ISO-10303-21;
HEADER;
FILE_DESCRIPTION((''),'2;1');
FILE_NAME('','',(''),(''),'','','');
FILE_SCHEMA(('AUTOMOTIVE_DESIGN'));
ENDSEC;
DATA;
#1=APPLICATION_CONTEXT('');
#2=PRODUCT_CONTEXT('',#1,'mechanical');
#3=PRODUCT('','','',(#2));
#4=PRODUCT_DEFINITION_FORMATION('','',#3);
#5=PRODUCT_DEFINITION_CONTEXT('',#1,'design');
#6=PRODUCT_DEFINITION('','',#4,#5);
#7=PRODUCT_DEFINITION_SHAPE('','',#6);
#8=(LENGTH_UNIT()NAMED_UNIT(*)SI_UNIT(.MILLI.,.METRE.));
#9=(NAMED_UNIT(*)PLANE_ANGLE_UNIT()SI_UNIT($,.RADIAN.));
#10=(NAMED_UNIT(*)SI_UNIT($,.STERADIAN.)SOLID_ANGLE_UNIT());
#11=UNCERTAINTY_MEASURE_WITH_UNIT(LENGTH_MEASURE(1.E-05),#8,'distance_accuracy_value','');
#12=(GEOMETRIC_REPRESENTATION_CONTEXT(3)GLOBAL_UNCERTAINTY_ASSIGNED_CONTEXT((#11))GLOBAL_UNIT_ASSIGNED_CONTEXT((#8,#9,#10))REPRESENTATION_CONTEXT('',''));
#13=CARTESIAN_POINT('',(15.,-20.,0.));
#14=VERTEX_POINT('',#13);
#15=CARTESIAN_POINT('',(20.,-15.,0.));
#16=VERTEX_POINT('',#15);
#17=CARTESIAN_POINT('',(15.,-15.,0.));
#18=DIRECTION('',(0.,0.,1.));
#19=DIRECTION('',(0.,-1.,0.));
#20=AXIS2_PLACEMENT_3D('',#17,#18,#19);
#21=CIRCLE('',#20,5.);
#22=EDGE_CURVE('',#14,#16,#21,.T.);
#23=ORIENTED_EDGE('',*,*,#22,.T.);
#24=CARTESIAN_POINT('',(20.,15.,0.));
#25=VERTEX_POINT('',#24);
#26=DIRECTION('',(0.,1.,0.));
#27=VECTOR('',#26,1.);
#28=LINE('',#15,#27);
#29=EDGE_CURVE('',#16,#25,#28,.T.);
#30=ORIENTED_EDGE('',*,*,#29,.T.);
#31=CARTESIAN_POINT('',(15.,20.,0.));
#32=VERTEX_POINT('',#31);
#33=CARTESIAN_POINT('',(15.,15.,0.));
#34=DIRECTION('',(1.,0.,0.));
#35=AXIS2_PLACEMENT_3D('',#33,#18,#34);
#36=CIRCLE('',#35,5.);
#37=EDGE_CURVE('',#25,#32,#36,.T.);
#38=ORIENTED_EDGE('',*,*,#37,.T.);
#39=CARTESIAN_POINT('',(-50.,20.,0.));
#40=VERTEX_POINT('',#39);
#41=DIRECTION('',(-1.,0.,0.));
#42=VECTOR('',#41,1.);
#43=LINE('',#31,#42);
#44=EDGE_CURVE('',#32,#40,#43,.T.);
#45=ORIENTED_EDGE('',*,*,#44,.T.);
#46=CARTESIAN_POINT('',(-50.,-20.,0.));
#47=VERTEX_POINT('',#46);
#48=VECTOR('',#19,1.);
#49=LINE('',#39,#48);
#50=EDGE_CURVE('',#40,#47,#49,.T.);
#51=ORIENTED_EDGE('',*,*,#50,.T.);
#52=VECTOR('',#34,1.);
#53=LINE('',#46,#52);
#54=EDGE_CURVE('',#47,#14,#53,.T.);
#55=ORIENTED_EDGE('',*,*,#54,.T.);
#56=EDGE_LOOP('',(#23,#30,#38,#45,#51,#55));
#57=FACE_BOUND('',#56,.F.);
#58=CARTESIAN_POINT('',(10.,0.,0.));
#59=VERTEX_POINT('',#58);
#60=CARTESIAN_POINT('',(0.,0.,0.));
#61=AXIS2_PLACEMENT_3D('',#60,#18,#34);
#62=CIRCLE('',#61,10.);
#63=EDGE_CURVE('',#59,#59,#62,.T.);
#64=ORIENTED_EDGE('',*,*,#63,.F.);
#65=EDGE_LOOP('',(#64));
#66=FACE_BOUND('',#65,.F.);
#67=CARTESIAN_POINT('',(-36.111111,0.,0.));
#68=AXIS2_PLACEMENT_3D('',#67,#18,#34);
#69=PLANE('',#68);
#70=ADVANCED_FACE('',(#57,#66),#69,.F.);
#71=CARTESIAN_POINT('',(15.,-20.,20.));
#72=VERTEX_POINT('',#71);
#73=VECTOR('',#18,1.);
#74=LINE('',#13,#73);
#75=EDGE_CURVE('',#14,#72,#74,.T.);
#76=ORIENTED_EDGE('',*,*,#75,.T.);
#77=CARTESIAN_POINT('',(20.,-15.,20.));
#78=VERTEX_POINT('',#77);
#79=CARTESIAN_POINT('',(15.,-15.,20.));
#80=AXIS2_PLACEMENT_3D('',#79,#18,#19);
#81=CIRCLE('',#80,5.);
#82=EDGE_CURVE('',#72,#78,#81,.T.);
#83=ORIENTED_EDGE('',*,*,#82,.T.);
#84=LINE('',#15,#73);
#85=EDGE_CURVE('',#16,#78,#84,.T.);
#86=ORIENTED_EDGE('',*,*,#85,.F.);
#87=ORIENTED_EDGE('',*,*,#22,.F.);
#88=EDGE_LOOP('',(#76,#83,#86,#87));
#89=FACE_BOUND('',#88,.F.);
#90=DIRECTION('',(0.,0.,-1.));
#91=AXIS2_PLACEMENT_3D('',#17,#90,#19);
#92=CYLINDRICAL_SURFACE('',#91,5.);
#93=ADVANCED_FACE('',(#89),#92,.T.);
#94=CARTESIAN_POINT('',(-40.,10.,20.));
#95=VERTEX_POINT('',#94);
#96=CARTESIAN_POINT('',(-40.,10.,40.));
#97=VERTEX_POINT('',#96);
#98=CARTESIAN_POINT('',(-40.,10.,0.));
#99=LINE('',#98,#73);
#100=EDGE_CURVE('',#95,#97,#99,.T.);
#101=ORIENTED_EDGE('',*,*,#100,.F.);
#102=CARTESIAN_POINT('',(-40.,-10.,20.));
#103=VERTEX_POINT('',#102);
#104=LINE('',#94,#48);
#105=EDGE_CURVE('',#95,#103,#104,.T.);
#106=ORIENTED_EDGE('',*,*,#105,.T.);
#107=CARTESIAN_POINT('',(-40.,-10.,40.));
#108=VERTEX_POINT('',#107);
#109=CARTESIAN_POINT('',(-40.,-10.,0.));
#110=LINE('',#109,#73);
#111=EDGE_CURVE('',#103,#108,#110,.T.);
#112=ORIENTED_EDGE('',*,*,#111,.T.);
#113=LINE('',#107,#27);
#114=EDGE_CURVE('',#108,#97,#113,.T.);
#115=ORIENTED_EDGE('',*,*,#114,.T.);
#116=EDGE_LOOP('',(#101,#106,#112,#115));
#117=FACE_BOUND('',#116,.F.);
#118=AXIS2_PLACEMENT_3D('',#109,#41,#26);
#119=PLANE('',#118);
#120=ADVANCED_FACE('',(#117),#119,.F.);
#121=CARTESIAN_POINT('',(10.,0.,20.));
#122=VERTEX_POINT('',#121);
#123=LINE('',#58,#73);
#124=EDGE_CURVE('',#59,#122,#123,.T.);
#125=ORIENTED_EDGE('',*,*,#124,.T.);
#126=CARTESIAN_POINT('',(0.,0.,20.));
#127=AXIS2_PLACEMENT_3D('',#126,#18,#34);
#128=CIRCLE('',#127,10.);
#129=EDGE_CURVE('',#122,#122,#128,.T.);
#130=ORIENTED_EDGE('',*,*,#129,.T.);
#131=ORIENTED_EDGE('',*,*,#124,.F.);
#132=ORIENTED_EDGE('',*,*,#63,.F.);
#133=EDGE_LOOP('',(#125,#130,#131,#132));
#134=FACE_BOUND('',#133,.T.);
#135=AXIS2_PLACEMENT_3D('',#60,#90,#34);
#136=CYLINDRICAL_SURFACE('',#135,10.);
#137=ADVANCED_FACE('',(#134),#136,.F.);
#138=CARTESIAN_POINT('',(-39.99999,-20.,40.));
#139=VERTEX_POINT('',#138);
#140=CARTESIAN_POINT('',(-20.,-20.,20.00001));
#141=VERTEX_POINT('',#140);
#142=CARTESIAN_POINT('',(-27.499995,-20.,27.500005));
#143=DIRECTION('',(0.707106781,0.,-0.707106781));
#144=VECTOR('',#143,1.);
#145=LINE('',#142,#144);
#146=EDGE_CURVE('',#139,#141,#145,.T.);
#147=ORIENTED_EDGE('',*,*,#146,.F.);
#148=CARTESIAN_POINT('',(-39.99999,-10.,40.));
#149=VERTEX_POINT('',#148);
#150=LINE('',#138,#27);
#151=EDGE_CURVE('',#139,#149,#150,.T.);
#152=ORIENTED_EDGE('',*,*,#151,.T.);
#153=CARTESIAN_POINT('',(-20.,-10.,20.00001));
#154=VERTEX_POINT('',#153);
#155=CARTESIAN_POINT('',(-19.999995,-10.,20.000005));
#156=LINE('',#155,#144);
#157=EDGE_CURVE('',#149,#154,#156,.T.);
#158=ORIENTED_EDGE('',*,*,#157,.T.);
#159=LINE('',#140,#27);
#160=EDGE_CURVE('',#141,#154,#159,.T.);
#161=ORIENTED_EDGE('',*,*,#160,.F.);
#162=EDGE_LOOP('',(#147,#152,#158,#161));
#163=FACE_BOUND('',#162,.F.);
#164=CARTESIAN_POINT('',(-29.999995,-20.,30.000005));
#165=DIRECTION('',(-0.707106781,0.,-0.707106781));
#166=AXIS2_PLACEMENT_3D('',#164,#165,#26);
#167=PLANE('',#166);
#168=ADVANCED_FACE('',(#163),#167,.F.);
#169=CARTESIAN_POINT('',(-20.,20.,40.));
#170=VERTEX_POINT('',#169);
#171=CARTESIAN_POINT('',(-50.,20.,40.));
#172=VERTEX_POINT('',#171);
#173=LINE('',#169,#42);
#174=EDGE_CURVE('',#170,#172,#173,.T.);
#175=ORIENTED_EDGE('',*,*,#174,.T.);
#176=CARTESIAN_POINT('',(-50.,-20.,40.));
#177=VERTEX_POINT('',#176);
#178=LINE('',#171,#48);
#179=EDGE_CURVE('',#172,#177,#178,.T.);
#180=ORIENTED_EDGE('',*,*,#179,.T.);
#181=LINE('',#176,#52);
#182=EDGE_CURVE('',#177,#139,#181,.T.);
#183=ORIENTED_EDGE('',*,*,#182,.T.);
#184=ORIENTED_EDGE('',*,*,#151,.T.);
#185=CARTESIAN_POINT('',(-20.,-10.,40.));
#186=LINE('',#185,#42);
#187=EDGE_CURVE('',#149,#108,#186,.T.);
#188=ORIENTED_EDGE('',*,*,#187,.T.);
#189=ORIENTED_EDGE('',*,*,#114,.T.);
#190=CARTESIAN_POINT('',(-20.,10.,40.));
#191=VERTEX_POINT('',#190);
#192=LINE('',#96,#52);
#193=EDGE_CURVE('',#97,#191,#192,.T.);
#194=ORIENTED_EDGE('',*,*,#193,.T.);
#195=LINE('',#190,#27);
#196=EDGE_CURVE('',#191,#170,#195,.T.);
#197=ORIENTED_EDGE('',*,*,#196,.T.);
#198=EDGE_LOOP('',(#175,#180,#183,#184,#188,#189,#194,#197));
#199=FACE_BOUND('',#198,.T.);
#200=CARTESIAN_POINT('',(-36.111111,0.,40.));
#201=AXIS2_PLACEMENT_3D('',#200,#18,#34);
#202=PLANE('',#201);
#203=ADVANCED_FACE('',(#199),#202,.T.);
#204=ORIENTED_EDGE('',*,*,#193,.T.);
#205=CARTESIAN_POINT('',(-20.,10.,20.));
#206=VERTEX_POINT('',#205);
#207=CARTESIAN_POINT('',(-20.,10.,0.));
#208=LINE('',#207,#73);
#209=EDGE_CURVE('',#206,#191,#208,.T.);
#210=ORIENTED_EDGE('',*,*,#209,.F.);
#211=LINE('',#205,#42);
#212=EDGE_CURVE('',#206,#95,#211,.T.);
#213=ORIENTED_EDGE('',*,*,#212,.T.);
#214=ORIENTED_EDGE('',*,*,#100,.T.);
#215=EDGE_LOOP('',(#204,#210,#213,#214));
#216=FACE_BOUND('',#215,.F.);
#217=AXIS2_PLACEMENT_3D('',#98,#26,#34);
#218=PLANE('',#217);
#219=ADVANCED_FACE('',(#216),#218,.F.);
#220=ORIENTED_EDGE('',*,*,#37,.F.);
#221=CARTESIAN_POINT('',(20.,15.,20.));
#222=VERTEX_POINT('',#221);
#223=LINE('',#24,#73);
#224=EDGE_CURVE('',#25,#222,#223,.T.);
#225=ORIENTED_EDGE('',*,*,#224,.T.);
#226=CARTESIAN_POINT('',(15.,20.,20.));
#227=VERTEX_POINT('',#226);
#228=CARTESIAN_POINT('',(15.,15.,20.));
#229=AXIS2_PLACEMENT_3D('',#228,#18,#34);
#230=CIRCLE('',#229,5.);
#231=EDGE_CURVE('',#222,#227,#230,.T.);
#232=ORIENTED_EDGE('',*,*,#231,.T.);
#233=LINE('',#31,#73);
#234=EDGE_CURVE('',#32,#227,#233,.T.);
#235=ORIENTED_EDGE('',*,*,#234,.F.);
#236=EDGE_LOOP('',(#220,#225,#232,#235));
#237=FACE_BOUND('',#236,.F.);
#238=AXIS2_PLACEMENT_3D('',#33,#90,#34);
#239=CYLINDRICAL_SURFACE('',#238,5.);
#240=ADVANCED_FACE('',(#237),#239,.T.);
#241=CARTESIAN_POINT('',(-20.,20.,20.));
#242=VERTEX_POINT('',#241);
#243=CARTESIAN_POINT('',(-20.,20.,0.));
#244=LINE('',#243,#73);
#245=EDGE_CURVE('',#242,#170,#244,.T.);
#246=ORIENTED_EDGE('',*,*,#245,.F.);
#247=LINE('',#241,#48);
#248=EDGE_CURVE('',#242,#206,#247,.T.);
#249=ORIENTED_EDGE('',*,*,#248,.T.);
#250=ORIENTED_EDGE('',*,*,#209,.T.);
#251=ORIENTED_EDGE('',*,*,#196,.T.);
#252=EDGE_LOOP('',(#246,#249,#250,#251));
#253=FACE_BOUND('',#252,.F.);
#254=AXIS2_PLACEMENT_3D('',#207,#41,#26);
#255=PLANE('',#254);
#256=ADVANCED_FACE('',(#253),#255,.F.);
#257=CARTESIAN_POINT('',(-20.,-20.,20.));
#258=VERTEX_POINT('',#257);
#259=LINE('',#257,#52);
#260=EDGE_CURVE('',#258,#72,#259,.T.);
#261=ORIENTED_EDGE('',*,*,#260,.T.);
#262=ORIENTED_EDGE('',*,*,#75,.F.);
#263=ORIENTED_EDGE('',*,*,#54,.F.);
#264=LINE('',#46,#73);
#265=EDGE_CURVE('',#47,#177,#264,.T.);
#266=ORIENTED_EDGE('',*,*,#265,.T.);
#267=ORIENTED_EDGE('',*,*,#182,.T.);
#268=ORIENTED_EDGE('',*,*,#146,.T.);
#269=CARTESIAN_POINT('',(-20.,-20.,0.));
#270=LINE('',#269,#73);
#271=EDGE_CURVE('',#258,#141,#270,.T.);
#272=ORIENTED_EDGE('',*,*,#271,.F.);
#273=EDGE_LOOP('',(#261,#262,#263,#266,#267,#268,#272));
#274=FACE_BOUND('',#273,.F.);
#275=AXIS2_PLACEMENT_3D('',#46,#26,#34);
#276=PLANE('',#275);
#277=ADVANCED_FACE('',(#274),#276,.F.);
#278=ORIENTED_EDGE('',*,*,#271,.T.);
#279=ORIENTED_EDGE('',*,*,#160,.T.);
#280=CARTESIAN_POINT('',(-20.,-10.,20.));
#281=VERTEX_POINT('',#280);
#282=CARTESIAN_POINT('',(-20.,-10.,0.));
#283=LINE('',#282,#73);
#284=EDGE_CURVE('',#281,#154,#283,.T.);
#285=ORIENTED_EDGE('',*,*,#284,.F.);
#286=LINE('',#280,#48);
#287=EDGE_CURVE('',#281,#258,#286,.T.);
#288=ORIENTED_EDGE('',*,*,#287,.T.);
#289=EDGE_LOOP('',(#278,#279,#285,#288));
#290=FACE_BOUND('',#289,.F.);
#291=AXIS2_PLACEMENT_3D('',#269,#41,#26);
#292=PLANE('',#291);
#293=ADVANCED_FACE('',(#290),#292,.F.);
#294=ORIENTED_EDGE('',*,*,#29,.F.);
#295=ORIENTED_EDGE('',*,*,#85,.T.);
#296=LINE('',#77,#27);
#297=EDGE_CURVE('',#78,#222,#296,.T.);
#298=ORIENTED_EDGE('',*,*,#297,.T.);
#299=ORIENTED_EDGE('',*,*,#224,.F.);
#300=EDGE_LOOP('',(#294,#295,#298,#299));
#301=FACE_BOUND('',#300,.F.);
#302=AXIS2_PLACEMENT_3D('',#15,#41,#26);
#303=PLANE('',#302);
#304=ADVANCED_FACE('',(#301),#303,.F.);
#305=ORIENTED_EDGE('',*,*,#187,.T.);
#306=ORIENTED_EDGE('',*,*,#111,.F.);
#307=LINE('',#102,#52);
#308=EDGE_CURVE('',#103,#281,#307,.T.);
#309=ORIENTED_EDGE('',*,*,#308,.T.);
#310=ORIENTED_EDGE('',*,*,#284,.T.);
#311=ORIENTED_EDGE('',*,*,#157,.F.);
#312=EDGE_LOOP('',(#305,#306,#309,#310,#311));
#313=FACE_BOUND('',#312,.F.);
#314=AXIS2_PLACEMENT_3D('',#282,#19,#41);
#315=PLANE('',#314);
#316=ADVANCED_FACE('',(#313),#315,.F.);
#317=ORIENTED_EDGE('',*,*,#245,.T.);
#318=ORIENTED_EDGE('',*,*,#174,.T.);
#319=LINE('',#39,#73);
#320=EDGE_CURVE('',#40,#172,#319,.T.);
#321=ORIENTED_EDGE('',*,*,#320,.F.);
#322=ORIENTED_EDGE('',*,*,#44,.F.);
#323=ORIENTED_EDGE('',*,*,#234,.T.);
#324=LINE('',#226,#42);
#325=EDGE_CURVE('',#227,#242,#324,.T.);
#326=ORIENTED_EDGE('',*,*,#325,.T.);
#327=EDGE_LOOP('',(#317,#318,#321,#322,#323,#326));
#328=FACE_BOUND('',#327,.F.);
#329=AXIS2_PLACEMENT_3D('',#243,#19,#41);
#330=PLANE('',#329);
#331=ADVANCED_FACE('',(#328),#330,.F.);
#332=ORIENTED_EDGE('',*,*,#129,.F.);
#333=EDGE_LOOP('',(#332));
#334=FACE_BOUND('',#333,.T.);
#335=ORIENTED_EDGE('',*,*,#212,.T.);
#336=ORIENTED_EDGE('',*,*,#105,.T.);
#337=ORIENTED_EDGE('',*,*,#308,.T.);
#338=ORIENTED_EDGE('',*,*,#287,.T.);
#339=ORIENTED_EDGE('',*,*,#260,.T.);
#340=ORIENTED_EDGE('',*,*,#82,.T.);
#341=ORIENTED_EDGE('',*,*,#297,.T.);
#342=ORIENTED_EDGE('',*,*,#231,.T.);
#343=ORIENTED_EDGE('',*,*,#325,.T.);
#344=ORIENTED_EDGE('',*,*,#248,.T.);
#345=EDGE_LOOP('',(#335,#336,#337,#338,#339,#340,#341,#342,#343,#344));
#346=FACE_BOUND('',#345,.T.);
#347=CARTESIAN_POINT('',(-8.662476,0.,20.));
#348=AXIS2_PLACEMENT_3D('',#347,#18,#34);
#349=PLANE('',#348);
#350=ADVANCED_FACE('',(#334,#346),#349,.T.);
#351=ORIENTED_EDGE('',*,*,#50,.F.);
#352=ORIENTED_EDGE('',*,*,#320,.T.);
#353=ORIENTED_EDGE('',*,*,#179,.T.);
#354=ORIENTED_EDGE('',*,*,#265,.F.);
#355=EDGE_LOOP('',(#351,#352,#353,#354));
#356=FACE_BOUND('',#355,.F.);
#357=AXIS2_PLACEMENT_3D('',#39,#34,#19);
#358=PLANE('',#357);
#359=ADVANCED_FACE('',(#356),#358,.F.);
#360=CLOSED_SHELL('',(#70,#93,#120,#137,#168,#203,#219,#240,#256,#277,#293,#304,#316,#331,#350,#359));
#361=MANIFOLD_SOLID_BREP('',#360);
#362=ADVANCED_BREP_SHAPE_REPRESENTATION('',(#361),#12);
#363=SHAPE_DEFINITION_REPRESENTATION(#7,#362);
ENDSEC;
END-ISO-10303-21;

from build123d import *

# Parameters (mm, degrees)
F0_R     = 10
F1_DEPTH = 20
F2_DEPTH = 40
F3_SIZE  = 19.99999


# Not quite as in the source:
# - a fillet or chamfer is up to 0.001 mm smaller than in the source, because OpenCascade refuses the exact size


with BuildPart() as f1:
    # F0 (on Top) → F1 (new body)
    with BuildSketch(Plane.XY):
        with BuildLine():
            Line((15, 20), (-20, 20))
            Line((-20, 20), (-20, 10))
            Line((-20, 10), (-40, 10))
            Line((-40, 10), (-40, -10))
            Line((-40, -10), (-20, -10))
            Line((-20, -10), (-20, -20))
            Line((-20, -20), (15, -20))
            ThreePointArc((15, -20), (18.5355339059, -18.5355339059), (20, -15))
            Line((20, -15), (20, 15))
            ThreePointArc((20, 15), (18.5355339059, 18.5355339059), (15, 20))
        make_face()
        Circle(F0_R, mode=Mode.SUBTRACT)
    extrude(amount=F1_DEPTH)

    # F0 (on Top) → F2 (join)
    with BuildSketch(Plane.XY):
        Polygon((-40, 20), (-50, 20), (-50, 10), (-50, -10), (-50, -20), (-40, -20), (-20, -20), (-20, -10), (-40, -10), (-40, 10), (-20, 10), (-20, 20), align=None)
    extrude(amount=F2_DEPTH)

    # F3 (size 20 in the source; OpenCascade refuses exactly that, so slightly less here)
    f3_edges = [f1.edges().sort_by_distance(p)[0] for p in [
        (-20, -15, 40),
    ]]
    chamfer(f3_edges, length=F3_SIZE)


solid = f1.part
